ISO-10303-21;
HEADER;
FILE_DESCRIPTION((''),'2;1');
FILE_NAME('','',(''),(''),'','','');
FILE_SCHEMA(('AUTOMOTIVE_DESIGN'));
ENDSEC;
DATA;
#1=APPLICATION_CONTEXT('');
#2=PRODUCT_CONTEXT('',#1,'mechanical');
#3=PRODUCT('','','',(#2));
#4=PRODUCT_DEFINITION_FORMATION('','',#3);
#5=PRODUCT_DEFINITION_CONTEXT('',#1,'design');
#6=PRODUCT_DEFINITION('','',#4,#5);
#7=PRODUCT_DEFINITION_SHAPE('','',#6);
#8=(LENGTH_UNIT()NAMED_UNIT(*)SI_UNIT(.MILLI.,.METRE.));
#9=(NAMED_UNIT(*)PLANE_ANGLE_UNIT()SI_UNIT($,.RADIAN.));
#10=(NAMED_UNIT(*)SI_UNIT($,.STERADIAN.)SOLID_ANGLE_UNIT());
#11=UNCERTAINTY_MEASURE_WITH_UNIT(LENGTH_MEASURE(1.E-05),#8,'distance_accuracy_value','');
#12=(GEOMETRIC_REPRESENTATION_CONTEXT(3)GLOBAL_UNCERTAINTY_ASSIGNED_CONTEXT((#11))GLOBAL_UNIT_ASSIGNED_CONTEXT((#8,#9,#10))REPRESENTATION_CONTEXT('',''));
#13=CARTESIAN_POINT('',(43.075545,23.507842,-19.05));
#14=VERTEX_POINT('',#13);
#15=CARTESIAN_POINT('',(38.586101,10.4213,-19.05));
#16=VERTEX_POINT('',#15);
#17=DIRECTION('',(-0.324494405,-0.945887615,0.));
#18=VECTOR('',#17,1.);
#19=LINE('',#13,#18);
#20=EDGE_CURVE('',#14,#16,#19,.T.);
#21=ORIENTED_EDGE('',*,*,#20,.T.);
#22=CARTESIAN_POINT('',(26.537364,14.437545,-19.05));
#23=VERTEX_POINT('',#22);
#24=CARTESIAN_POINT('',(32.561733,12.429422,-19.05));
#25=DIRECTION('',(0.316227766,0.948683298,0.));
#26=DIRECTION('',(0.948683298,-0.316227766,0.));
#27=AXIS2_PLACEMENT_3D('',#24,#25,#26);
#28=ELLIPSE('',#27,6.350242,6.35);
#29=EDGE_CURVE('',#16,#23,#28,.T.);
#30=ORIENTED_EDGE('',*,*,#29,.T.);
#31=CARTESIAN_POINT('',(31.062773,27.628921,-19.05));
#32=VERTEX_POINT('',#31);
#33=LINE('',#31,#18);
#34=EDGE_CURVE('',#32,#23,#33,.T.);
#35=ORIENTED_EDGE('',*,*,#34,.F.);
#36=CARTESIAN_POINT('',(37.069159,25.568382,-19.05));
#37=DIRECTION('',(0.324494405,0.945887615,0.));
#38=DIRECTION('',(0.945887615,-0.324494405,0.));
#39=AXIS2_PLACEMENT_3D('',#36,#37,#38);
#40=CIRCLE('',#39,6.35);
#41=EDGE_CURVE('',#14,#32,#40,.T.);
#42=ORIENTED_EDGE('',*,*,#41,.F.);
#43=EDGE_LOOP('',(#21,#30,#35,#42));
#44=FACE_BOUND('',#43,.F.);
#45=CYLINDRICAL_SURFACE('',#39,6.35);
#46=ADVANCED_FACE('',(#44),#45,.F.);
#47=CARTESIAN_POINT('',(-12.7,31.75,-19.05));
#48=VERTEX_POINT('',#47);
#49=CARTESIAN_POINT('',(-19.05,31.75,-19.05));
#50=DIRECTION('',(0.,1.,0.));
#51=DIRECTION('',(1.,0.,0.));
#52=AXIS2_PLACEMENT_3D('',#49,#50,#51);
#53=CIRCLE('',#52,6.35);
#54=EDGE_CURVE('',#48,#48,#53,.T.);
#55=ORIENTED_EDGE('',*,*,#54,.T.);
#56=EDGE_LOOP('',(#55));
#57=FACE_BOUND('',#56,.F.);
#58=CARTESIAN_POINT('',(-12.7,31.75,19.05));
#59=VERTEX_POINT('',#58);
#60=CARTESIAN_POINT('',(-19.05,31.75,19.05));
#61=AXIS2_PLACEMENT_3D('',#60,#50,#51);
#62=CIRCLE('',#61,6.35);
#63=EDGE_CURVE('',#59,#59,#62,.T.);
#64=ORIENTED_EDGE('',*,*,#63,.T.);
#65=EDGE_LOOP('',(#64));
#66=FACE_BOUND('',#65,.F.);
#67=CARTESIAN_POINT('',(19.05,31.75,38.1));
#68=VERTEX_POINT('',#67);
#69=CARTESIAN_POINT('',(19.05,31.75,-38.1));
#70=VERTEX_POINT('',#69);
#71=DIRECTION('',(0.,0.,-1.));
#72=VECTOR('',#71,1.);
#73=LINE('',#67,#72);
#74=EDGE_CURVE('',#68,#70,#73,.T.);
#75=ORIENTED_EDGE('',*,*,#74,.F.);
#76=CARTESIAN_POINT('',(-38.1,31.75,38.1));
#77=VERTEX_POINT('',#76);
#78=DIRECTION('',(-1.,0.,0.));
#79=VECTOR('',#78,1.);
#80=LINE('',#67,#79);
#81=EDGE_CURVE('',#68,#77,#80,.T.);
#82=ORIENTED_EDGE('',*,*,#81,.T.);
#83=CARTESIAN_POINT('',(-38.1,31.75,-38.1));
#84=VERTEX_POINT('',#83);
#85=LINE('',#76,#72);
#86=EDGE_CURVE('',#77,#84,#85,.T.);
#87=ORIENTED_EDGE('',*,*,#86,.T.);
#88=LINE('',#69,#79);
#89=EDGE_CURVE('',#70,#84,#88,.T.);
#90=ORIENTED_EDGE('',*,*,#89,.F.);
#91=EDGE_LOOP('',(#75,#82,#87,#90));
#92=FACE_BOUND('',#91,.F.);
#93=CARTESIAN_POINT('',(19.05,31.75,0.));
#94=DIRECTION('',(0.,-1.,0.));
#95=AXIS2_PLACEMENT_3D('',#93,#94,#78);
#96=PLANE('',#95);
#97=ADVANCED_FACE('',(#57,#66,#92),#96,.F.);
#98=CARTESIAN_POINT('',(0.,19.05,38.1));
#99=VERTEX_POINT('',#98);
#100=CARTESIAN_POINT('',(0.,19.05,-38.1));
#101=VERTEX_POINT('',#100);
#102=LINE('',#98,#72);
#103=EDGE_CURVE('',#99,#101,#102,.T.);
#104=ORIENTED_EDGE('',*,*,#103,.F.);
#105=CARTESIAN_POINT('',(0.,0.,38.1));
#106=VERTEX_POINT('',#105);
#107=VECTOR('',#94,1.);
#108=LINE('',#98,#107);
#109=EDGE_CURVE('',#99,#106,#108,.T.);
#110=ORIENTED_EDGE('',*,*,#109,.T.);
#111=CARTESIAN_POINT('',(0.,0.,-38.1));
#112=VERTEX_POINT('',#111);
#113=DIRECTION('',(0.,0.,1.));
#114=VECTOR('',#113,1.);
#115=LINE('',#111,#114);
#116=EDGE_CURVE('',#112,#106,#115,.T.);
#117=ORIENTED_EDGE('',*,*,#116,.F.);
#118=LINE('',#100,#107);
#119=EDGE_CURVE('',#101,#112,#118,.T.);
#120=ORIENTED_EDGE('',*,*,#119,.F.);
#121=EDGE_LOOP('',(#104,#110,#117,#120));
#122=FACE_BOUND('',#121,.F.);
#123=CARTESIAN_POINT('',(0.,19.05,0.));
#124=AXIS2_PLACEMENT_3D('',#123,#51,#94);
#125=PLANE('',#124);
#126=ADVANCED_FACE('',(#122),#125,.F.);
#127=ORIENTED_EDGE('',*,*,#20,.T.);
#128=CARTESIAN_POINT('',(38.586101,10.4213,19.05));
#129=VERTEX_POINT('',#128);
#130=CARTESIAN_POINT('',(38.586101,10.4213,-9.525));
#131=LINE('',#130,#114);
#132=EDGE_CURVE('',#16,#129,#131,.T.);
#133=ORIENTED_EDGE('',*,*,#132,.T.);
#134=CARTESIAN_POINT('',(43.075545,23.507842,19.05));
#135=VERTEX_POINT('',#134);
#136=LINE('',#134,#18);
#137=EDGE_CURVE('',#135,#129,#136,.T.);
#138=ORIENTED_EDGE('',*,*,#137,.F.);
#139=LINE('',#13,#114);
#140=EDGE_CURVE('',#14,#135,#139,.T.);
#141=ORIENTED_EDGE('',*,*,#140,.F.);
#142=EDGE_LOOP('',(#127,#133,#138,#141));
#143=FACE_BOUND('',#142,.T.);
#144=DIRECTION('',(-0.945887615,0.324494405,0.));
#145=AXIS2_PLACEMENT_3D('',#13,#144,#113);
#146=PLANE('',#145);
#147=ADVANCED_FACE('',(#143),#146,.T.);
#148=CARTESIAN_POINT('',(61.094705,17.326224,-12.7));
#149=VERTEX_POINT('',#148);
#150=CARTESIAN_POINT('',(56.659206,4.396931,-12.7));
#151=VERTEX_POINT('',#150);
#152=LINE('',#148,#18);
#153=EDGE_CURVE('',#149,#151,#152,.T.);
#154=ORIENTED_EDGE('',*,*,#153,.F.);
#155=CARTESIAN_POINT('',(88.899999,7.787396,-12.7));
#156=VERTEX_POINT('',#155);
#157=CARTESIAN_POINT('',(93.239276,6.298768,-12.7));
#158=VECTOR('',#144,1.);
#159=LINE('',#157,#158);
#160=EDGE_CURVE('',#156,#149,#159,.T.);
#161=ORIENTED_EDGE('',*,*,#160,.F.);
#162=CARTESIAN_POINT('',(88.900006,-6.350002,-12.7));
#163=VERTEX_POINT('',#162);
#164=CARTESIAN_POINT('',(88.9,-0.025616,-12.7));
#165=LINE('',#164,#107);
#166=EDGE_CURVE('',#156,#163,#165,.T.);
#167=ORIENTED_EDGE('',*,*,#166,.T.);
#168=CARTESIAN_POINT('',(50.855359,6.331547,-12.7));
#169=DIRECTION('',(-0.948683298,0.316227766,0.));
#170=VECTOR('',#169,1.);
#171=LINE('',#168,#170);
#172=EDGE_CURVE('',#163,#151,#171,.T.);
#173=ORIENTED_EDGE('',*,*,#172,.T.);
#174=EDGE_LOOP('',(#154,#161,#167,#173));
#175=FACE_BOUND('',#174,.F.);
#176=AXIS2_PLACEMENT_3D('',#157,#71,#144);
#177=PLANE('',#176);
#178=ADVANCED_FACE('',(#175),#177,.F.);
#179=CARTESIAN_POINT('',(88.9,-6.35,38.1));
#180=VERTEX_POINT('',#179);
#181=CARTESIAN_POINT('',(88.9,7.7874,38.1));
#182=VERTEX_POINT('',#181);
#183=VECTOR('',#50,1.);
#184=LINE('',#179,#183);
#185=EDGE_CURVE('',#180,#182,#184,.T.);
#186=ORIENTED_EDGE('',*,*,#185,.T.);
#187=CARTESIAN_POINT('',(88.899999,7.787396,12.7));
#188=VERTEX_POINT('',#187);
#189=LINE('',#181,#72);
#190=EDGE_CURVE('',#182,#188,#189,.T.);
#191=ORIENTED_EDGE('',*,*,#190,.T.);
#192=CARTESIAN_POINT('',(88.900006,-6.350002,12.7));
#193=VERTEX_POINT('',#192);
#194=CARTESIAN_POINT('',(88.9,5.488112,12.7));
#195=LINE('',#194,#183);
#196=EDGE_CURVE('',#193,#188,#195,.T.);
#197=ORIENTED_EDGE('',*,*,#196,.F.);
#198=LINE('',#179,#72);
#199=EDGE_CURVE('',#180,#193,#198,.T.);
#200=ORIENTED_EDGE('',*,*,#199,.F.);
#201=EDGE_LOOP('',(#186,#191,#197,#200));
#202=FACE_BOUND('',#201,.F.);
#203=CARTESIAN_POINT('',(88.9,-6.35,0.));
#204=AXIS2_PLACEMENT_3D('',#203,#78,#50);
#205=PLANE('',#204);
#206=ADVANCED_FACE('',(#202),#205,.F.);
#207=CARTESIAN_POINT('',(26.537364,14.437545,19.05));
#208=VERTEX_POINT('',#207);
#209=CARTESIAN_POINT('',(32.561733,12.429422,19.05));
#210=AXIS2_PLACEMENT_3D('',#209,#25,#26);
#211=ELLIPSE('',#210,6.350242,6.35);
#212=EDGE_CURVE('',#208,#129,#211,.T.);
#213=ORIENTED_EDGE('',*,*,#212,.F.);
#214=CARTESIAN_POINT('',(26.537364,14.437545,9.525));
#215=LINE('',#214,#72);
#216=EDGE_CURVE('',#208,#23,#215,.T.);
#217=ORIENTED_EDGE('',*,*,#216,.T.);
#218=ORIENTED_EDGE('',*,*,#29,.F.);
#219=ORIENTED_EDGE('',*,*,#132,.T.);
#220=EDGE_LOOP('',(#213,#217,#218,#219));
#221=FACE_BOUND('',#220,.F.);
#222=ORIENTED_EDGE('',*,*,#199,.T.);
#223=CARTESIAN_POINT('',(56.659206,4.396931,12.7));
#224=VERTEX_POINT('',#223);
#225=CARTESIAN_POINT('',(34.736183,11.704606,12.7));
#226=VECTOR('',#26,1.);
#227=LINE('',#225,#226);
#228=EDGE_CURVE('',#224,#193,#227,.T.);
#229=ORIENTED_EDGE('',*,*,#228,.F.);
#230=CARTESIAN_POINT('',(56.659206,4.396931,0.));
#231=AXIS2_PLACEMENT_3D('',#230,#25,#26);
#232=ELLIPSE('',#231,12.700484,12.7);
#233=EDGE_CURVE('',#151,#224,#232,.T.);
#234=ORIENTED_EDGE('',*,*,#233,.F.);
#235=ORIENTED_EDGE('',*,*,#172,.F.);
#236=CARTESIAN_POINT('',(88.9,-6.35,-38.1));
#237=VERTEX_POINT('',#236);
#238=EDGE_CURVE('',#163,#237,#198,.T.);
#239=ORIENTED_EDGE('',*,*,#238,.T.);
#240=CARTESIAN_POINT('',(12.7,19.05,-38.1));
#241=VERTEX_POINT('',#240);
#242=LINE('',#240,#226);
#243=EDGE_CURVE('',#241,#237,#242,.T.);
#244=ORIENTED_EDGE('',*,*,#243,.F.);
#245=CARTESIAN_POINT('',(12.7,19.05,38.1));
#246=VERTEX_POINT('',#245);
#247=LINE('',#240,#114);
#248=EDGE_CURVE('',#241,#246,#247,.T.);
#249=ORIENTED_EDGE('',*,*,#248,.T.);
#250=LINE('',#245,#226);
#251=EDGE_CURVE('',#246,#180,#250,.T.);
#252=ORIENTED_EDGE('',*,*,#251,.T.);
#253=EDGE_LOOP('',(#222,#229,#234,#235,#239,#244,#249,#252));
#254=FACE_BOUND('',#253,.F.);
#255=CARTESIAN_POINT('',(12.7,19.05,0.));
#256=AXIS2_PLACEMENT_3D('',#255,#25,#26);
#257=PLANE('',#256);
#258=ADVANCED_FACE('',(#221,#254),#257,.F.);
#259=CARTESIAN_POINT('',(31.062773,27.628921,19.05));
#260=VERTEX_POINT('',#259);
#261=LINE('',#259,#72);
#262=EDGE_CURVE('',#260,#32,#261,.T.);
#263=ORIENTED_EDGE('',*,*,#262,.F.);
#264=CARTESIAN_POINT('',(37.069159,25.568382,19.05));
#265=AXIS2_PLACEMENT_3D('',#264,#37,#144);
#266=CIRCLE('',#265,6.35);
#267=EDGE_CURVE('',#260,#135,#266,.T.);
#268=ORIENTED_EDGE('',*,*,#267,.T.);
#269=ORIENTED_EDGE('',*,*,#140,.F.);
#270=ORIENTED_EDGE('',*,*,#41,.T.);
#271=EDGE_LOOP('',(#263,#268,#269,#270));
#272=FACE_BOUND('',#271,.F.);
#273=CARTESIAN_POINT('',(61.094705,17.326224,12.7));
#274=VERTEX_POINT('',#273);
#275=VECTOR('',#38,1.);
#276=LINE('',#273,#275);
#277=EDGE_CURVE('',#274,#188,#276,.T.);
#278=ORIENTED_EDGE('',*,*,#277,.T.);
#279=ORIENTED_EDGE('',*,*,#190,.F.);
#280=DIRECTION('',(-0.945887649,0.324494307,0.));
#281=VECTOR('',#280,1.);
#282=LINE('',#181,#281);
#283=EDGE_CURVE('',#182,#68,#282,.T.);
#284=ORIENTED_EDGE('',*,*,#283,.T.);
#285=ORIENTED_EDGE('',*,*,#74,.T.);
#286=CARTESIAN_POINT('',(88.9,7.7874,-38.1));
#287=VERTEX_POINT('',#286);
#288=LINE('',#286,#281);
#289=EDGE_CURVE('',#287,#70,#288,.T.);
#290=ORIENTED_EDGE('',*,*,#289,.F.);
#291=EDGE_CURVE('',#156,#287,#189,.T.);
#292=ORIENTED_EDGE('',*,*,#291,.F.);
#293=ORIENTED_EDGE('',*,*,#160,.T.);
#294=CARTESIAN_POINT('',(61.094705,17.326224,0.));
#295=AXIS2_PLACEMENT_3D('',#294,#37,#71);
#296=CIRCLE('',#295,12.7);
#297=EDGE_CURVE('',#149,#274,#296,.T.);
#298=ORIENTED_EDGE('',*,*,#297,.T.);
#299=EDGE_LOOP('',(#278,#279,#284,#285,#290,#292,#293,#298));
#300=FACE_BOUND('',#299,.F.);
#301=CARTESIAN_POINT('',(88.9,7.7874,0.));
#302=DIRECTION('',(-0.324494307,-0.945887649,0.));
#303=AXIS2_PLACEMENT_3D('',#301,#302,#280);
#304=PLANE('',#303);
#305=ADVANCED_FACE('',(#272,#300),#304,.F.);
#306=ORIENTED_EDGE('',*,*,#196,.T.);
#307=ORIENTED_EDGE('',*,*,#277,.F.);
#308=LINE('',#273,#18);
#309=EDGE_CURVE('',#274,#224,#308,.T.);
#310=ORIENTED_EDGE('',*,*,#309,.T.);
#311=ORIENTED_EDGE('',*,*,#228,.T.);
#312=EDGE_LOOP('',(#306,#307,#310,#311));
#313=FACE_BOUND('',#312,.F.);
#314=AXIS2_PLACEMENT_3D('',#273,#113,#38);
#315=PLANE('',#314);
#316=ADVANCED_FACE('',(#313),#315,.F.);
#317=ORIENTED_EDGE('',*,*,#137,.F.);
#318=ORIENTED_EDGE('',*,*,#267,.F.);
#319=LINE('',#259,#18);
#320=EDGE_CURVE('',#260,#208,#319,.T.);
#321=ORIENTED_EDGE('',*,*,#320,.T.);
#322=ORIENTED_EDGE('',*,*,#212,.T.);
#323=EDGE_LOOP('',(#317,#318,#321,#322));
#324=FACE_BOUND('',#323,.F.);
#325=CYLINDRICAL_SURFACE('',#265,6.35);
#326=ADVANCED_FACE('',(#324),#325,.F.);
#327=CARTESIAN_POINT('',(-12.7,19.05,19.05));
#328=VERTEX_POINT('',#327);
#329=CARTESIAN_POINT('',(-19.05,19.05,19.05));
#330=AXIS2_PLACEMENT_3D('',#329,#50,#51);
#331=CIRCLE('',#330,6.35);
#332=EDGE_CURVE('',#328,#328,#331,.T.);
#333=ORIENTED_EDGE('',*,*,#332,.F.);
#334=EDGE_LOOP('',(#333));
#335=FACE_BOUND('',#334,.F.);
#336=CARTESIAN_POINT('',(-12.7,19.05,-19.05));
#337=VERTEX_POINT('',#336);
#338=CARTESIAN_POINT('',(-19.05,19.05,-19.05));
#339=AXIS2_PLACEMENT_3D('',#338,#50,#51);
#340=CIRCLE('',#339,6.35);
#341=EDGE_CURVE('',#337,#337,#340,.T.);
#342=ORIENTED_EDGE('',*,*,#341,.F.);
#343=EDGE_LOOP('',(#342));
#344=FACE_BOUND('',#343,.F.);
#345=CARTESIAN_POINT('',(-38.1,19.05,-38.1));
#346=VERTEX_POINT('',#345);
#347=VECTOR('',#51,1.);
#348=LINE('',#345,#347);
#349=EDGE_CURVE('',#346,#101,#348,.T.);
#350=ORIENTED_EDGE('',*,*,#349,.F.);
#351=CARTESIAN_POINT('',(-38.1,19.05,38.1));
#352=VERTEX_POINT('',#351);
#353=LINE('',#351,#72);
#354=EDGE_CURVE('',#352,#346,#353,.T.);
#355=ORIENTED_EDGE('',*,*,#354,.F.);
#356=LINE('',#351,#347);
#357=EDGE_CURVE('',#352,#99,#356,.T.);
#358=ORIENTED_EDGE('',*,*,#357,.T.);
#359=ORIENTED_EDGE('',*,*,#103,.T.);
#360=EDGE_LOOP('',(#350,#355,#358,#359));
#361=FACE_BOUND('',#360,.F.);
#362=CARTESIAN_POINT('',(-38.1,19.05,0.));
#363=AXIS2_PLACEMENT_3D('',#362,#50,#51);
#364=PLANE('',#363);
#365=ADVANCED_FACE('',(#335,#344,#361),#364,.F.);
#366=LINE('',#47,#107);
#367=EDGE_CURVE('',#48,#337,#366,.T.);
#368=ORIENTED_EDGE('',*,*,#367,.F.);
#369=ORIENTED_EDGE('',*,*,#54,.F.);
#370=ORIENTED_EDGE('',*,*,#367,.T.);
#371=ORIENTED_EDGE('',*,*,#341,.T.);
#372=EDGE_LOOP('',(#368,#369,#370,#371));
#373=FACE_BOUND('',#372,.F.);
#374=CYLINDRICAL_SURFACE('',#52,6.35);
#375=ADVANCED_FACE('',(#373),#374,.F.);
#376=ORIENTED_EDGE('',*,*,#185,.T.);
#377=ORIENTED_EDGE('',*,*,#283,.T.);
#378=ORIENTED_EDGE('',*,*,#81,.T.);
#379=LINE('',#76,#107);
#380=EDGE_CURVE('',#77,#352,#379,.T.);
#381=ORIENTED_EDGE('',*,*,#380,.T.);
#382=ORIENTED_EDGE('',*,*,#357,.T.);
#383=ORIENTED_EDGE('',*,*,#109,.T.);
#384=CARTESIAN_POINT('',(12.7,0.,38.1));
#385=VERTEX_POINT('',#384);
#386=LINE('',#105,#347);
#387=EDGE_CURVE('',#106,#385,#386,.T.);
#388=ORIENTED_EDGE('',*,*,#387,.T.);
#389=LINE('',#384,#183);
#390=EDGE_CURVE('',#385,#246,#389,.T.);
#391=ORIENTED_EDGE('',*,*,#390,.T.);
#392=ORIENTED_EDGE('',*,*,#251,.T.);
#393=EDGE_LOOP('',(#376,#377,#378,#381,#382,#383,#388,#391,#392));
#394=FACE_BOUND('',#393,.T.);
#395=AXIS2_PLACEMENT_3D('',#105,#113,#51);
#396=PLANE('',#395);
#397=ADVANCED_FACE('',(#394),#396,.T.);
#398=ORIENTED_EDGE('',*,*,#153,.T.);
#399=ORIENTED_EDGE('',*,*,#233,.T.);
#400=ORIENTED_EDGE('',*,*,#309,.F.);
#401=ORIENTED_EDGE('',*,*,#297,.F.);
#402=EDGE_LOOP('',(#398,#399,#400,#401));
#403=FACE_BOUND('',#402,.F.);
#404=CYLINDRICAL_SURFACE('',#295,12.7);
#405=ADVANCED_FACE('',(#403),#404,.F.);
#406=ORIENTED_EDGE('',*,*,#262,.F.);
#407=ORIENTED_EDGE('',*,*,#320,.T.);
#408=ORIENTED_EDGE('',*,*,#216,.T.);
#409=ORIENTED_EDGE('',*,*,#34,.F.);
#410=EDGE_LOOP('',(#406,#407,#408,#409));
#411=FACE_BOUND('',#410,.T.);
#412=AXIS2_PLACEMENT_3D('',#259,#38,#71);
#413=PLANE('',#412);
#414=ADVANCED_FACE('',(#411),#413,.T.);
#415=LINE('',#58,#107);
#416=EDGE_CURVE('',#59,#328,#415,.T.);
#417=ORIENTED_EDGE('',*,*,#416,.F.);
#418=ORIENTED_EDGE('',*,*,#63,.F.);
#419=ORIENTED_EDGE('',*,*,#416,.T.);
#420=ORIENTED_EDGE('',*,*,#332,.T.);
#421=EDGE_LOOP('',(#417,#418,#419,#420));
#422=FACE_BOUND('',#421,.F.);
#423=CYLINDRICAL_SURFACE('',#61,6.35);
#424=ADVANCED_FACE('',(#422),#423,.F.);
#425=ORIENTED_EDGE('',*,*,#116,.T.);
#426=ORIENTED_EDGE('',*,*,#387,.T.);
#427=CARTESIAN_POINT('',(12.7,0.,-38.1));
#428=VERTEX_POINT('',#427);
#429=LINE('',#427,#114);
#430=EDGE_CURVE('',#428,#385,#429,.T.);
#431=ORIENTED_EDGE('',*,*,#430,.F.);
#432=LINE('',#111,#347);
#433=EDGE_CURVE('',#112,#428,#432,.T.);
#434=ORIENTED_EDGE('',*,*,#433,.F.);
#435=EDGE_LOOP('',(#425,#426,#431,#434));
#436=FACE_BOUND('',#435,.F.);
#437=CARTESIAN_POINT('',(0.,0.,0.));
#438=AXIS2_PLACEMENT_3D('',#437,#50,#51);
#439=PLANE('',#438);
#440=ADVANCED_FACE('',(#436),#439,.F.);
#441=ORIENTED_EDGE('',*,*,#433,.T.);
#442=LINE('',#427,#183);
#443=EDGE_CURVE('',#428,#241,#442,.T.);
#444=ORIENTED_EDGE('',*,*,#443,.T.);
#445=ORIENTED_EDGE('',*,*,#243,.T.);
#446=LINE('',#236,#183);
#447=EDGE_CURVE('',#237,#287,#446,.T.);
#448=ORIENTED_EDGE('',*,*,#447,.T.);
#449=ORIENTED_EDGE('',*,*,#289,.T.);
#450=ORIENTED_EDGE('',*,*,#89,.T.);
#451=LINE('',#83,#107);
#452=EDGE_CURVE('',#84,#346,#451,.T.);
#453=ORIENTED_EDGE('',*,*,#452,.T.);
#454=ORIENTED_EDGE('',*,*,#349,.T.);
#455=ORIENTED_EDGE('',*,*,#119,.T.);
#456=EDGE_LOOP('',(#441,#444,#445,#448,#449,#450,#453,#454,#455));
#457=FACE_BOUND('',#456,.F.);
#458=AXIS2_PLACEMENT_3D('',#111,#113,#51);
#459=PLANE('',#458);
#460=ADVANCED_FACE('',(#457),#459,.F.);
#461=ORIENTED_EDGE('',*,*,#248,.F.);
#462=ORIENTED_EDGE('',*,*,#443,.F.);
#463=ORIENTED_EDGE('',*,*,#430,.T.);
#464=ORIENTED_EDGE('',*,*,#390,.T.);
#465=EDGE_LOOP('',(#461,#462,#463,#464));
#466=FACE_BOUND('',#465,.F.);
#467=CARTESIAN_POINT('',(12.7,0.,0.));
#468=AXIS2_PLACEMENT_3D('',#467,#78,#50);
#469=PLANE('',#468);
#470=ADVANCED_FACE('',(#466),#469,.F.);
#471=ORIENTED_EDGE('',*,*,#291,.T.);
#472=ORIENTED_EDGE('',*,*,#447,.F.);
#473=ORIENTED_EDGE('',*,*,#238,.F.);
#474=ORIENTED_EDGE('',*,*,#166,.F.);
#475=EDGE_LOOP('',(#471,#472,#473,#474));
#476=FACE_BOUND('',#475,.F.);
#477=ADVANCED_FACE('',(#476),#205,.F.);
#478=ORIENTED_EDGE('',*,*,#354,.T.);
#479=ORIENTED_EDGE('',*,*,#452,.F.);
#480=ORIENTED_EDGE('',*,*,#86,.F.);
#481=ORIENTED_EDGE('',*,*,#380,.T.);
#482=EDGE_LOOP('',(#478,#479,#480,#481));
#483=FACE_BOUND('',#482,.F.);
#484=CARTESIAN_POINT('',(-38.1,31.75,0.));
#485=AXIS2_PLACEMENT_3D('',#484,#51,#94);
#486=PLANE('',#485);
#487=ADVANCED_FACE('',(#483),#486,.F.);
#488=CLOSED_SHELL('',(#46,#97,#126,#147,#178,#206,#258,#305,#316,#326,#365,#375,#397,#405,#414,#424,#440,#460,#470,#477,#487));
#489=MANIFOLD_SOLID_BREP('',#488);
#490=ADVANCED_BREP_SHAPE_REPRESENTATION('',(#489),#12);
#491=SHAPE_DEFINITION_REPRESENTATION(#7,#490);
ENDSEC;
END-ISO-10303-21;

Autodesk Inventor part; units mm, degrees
ref_plane "YZ Plane" through (0, 0, 0) normal (1, 0, 0) x (0, 1, 0)
ref_plane "XZ Plane" through (0, 0, 0) normal (0, 1, 0) x (-1, 0, 0)
ref_plane "XY Plane" through (0, 0, 0) normal (0, 0, 1) x (1, 0, 0)
sketch "Sketch1" plane through (0, 0, 0) normal (0, 0, 1) x (1, 0, 0)
  line L0 (0, 0) -> (12.7, 0)
  line L1 (12.7, 0) -> (12.7, 19.05)
  line L2 (12.7, 19.05) -> (88.9, -6.35)
  line L3 (88.9, -6.35) -> (88.9, 7.7874)
  line L4 (88.9, 7.7874) -> (19.05, 31.75)
  line L5 (19.05, 31.75) -> (-38.1, 31.75)
  line L6 (-38.1, 31.75) -> (-38.1, 19.05)
  line L7 (-38.1, 19.05) -> (0, 19.05)
  line L8 (0, 19.05) -> (0, 0)
  dimension "d9" = 38.1
  dimension "d10" = 12.7
  dimension "d11" = 19.05
  dimension "d12" = 38.1
  dimension "d13" = 12.7
  dimension "d14" = 127
  dimension "d15" = 57.15
  dimension "d16" = 0.5
extrude "Extrusion1" add sketch "Sketch1" along normal mid plane 76.2
sketch "Sketch2" plane through (-38.1, 31.75, 38.1) normal (0, 1, 0) x (1, 0, 0)
  circle A0 centre (19.05, 19.05) radius 6.35
  circle A1 centre (19.05, 57.15) radius 6.35
  line L0 (57.15, 0) -> (0, 0) projected
  line L1 (0, 76.2) -> (0, 0) projected
  point P0 (38.1, 38.1)
  dimension "d19" = 12.7
  dimension "d20" = 12.7
  dimension "d21" = 0
  dimension "d22" = 38.1
  dimension "d23" = 19.05
  dimension "d24" = 19.05
extrude "Extrusion2" cut sketch "Sketch2" against normal through all
sketch "Sketch3" plane through (19.05, 31.75, 38.1) normal (0.3244944, 0.9458876, 0) x (0.9458876, -0.3244944, 0)
  line L0 (19.05, 19.05) -> (19.05, 57.15) construction
  line L1 (12.7, 19.05) -> (12.7, 57.15)
  line L2 (25.4, 57.15) -> (25.4, 19.05)
  arc A0 (12.7, 19.05) -> (25.4, 19.05) centre (19.05, 19.05) ccw
  arc A1 (25.4, 57.15) -> (12.7, 57.15) centre (19.05, 57.15) ccw
  line L3 (-1.8853, 0) -> (78.4335, 0) projected
  line L4 (0, 76.2) -> (0, 0) projected
  line L5 (44.45, 25.4) -> (78.4335, 25.4)
  line L6 (78.4335, 76.2) -> (78.4335, 0) projected
  line L7 (78.4335, 50.8) -> (44.45, 50.8)
  arc A2 (44.45, 50.8) -> (44.45, 25.4) centre (44.45, 38.1) ccw
  point P0 (-7.7165, 38.1)
  point P1 (19.05, 38.1)
  dimension "d27" = 12.7
  dimension "d28" = 38.1
  dimension "d29" = 19.05
  dimension "d30" = 19.05
  dimension "d31" = 25.4
  dimension "d32" = 38.1
  dimension "d33" = 44.45
extrude "Extrusion3" cut sketch "Sketch3" against normal through all
properties part number "HW 7 Part 6" material "Steel, Mild"
